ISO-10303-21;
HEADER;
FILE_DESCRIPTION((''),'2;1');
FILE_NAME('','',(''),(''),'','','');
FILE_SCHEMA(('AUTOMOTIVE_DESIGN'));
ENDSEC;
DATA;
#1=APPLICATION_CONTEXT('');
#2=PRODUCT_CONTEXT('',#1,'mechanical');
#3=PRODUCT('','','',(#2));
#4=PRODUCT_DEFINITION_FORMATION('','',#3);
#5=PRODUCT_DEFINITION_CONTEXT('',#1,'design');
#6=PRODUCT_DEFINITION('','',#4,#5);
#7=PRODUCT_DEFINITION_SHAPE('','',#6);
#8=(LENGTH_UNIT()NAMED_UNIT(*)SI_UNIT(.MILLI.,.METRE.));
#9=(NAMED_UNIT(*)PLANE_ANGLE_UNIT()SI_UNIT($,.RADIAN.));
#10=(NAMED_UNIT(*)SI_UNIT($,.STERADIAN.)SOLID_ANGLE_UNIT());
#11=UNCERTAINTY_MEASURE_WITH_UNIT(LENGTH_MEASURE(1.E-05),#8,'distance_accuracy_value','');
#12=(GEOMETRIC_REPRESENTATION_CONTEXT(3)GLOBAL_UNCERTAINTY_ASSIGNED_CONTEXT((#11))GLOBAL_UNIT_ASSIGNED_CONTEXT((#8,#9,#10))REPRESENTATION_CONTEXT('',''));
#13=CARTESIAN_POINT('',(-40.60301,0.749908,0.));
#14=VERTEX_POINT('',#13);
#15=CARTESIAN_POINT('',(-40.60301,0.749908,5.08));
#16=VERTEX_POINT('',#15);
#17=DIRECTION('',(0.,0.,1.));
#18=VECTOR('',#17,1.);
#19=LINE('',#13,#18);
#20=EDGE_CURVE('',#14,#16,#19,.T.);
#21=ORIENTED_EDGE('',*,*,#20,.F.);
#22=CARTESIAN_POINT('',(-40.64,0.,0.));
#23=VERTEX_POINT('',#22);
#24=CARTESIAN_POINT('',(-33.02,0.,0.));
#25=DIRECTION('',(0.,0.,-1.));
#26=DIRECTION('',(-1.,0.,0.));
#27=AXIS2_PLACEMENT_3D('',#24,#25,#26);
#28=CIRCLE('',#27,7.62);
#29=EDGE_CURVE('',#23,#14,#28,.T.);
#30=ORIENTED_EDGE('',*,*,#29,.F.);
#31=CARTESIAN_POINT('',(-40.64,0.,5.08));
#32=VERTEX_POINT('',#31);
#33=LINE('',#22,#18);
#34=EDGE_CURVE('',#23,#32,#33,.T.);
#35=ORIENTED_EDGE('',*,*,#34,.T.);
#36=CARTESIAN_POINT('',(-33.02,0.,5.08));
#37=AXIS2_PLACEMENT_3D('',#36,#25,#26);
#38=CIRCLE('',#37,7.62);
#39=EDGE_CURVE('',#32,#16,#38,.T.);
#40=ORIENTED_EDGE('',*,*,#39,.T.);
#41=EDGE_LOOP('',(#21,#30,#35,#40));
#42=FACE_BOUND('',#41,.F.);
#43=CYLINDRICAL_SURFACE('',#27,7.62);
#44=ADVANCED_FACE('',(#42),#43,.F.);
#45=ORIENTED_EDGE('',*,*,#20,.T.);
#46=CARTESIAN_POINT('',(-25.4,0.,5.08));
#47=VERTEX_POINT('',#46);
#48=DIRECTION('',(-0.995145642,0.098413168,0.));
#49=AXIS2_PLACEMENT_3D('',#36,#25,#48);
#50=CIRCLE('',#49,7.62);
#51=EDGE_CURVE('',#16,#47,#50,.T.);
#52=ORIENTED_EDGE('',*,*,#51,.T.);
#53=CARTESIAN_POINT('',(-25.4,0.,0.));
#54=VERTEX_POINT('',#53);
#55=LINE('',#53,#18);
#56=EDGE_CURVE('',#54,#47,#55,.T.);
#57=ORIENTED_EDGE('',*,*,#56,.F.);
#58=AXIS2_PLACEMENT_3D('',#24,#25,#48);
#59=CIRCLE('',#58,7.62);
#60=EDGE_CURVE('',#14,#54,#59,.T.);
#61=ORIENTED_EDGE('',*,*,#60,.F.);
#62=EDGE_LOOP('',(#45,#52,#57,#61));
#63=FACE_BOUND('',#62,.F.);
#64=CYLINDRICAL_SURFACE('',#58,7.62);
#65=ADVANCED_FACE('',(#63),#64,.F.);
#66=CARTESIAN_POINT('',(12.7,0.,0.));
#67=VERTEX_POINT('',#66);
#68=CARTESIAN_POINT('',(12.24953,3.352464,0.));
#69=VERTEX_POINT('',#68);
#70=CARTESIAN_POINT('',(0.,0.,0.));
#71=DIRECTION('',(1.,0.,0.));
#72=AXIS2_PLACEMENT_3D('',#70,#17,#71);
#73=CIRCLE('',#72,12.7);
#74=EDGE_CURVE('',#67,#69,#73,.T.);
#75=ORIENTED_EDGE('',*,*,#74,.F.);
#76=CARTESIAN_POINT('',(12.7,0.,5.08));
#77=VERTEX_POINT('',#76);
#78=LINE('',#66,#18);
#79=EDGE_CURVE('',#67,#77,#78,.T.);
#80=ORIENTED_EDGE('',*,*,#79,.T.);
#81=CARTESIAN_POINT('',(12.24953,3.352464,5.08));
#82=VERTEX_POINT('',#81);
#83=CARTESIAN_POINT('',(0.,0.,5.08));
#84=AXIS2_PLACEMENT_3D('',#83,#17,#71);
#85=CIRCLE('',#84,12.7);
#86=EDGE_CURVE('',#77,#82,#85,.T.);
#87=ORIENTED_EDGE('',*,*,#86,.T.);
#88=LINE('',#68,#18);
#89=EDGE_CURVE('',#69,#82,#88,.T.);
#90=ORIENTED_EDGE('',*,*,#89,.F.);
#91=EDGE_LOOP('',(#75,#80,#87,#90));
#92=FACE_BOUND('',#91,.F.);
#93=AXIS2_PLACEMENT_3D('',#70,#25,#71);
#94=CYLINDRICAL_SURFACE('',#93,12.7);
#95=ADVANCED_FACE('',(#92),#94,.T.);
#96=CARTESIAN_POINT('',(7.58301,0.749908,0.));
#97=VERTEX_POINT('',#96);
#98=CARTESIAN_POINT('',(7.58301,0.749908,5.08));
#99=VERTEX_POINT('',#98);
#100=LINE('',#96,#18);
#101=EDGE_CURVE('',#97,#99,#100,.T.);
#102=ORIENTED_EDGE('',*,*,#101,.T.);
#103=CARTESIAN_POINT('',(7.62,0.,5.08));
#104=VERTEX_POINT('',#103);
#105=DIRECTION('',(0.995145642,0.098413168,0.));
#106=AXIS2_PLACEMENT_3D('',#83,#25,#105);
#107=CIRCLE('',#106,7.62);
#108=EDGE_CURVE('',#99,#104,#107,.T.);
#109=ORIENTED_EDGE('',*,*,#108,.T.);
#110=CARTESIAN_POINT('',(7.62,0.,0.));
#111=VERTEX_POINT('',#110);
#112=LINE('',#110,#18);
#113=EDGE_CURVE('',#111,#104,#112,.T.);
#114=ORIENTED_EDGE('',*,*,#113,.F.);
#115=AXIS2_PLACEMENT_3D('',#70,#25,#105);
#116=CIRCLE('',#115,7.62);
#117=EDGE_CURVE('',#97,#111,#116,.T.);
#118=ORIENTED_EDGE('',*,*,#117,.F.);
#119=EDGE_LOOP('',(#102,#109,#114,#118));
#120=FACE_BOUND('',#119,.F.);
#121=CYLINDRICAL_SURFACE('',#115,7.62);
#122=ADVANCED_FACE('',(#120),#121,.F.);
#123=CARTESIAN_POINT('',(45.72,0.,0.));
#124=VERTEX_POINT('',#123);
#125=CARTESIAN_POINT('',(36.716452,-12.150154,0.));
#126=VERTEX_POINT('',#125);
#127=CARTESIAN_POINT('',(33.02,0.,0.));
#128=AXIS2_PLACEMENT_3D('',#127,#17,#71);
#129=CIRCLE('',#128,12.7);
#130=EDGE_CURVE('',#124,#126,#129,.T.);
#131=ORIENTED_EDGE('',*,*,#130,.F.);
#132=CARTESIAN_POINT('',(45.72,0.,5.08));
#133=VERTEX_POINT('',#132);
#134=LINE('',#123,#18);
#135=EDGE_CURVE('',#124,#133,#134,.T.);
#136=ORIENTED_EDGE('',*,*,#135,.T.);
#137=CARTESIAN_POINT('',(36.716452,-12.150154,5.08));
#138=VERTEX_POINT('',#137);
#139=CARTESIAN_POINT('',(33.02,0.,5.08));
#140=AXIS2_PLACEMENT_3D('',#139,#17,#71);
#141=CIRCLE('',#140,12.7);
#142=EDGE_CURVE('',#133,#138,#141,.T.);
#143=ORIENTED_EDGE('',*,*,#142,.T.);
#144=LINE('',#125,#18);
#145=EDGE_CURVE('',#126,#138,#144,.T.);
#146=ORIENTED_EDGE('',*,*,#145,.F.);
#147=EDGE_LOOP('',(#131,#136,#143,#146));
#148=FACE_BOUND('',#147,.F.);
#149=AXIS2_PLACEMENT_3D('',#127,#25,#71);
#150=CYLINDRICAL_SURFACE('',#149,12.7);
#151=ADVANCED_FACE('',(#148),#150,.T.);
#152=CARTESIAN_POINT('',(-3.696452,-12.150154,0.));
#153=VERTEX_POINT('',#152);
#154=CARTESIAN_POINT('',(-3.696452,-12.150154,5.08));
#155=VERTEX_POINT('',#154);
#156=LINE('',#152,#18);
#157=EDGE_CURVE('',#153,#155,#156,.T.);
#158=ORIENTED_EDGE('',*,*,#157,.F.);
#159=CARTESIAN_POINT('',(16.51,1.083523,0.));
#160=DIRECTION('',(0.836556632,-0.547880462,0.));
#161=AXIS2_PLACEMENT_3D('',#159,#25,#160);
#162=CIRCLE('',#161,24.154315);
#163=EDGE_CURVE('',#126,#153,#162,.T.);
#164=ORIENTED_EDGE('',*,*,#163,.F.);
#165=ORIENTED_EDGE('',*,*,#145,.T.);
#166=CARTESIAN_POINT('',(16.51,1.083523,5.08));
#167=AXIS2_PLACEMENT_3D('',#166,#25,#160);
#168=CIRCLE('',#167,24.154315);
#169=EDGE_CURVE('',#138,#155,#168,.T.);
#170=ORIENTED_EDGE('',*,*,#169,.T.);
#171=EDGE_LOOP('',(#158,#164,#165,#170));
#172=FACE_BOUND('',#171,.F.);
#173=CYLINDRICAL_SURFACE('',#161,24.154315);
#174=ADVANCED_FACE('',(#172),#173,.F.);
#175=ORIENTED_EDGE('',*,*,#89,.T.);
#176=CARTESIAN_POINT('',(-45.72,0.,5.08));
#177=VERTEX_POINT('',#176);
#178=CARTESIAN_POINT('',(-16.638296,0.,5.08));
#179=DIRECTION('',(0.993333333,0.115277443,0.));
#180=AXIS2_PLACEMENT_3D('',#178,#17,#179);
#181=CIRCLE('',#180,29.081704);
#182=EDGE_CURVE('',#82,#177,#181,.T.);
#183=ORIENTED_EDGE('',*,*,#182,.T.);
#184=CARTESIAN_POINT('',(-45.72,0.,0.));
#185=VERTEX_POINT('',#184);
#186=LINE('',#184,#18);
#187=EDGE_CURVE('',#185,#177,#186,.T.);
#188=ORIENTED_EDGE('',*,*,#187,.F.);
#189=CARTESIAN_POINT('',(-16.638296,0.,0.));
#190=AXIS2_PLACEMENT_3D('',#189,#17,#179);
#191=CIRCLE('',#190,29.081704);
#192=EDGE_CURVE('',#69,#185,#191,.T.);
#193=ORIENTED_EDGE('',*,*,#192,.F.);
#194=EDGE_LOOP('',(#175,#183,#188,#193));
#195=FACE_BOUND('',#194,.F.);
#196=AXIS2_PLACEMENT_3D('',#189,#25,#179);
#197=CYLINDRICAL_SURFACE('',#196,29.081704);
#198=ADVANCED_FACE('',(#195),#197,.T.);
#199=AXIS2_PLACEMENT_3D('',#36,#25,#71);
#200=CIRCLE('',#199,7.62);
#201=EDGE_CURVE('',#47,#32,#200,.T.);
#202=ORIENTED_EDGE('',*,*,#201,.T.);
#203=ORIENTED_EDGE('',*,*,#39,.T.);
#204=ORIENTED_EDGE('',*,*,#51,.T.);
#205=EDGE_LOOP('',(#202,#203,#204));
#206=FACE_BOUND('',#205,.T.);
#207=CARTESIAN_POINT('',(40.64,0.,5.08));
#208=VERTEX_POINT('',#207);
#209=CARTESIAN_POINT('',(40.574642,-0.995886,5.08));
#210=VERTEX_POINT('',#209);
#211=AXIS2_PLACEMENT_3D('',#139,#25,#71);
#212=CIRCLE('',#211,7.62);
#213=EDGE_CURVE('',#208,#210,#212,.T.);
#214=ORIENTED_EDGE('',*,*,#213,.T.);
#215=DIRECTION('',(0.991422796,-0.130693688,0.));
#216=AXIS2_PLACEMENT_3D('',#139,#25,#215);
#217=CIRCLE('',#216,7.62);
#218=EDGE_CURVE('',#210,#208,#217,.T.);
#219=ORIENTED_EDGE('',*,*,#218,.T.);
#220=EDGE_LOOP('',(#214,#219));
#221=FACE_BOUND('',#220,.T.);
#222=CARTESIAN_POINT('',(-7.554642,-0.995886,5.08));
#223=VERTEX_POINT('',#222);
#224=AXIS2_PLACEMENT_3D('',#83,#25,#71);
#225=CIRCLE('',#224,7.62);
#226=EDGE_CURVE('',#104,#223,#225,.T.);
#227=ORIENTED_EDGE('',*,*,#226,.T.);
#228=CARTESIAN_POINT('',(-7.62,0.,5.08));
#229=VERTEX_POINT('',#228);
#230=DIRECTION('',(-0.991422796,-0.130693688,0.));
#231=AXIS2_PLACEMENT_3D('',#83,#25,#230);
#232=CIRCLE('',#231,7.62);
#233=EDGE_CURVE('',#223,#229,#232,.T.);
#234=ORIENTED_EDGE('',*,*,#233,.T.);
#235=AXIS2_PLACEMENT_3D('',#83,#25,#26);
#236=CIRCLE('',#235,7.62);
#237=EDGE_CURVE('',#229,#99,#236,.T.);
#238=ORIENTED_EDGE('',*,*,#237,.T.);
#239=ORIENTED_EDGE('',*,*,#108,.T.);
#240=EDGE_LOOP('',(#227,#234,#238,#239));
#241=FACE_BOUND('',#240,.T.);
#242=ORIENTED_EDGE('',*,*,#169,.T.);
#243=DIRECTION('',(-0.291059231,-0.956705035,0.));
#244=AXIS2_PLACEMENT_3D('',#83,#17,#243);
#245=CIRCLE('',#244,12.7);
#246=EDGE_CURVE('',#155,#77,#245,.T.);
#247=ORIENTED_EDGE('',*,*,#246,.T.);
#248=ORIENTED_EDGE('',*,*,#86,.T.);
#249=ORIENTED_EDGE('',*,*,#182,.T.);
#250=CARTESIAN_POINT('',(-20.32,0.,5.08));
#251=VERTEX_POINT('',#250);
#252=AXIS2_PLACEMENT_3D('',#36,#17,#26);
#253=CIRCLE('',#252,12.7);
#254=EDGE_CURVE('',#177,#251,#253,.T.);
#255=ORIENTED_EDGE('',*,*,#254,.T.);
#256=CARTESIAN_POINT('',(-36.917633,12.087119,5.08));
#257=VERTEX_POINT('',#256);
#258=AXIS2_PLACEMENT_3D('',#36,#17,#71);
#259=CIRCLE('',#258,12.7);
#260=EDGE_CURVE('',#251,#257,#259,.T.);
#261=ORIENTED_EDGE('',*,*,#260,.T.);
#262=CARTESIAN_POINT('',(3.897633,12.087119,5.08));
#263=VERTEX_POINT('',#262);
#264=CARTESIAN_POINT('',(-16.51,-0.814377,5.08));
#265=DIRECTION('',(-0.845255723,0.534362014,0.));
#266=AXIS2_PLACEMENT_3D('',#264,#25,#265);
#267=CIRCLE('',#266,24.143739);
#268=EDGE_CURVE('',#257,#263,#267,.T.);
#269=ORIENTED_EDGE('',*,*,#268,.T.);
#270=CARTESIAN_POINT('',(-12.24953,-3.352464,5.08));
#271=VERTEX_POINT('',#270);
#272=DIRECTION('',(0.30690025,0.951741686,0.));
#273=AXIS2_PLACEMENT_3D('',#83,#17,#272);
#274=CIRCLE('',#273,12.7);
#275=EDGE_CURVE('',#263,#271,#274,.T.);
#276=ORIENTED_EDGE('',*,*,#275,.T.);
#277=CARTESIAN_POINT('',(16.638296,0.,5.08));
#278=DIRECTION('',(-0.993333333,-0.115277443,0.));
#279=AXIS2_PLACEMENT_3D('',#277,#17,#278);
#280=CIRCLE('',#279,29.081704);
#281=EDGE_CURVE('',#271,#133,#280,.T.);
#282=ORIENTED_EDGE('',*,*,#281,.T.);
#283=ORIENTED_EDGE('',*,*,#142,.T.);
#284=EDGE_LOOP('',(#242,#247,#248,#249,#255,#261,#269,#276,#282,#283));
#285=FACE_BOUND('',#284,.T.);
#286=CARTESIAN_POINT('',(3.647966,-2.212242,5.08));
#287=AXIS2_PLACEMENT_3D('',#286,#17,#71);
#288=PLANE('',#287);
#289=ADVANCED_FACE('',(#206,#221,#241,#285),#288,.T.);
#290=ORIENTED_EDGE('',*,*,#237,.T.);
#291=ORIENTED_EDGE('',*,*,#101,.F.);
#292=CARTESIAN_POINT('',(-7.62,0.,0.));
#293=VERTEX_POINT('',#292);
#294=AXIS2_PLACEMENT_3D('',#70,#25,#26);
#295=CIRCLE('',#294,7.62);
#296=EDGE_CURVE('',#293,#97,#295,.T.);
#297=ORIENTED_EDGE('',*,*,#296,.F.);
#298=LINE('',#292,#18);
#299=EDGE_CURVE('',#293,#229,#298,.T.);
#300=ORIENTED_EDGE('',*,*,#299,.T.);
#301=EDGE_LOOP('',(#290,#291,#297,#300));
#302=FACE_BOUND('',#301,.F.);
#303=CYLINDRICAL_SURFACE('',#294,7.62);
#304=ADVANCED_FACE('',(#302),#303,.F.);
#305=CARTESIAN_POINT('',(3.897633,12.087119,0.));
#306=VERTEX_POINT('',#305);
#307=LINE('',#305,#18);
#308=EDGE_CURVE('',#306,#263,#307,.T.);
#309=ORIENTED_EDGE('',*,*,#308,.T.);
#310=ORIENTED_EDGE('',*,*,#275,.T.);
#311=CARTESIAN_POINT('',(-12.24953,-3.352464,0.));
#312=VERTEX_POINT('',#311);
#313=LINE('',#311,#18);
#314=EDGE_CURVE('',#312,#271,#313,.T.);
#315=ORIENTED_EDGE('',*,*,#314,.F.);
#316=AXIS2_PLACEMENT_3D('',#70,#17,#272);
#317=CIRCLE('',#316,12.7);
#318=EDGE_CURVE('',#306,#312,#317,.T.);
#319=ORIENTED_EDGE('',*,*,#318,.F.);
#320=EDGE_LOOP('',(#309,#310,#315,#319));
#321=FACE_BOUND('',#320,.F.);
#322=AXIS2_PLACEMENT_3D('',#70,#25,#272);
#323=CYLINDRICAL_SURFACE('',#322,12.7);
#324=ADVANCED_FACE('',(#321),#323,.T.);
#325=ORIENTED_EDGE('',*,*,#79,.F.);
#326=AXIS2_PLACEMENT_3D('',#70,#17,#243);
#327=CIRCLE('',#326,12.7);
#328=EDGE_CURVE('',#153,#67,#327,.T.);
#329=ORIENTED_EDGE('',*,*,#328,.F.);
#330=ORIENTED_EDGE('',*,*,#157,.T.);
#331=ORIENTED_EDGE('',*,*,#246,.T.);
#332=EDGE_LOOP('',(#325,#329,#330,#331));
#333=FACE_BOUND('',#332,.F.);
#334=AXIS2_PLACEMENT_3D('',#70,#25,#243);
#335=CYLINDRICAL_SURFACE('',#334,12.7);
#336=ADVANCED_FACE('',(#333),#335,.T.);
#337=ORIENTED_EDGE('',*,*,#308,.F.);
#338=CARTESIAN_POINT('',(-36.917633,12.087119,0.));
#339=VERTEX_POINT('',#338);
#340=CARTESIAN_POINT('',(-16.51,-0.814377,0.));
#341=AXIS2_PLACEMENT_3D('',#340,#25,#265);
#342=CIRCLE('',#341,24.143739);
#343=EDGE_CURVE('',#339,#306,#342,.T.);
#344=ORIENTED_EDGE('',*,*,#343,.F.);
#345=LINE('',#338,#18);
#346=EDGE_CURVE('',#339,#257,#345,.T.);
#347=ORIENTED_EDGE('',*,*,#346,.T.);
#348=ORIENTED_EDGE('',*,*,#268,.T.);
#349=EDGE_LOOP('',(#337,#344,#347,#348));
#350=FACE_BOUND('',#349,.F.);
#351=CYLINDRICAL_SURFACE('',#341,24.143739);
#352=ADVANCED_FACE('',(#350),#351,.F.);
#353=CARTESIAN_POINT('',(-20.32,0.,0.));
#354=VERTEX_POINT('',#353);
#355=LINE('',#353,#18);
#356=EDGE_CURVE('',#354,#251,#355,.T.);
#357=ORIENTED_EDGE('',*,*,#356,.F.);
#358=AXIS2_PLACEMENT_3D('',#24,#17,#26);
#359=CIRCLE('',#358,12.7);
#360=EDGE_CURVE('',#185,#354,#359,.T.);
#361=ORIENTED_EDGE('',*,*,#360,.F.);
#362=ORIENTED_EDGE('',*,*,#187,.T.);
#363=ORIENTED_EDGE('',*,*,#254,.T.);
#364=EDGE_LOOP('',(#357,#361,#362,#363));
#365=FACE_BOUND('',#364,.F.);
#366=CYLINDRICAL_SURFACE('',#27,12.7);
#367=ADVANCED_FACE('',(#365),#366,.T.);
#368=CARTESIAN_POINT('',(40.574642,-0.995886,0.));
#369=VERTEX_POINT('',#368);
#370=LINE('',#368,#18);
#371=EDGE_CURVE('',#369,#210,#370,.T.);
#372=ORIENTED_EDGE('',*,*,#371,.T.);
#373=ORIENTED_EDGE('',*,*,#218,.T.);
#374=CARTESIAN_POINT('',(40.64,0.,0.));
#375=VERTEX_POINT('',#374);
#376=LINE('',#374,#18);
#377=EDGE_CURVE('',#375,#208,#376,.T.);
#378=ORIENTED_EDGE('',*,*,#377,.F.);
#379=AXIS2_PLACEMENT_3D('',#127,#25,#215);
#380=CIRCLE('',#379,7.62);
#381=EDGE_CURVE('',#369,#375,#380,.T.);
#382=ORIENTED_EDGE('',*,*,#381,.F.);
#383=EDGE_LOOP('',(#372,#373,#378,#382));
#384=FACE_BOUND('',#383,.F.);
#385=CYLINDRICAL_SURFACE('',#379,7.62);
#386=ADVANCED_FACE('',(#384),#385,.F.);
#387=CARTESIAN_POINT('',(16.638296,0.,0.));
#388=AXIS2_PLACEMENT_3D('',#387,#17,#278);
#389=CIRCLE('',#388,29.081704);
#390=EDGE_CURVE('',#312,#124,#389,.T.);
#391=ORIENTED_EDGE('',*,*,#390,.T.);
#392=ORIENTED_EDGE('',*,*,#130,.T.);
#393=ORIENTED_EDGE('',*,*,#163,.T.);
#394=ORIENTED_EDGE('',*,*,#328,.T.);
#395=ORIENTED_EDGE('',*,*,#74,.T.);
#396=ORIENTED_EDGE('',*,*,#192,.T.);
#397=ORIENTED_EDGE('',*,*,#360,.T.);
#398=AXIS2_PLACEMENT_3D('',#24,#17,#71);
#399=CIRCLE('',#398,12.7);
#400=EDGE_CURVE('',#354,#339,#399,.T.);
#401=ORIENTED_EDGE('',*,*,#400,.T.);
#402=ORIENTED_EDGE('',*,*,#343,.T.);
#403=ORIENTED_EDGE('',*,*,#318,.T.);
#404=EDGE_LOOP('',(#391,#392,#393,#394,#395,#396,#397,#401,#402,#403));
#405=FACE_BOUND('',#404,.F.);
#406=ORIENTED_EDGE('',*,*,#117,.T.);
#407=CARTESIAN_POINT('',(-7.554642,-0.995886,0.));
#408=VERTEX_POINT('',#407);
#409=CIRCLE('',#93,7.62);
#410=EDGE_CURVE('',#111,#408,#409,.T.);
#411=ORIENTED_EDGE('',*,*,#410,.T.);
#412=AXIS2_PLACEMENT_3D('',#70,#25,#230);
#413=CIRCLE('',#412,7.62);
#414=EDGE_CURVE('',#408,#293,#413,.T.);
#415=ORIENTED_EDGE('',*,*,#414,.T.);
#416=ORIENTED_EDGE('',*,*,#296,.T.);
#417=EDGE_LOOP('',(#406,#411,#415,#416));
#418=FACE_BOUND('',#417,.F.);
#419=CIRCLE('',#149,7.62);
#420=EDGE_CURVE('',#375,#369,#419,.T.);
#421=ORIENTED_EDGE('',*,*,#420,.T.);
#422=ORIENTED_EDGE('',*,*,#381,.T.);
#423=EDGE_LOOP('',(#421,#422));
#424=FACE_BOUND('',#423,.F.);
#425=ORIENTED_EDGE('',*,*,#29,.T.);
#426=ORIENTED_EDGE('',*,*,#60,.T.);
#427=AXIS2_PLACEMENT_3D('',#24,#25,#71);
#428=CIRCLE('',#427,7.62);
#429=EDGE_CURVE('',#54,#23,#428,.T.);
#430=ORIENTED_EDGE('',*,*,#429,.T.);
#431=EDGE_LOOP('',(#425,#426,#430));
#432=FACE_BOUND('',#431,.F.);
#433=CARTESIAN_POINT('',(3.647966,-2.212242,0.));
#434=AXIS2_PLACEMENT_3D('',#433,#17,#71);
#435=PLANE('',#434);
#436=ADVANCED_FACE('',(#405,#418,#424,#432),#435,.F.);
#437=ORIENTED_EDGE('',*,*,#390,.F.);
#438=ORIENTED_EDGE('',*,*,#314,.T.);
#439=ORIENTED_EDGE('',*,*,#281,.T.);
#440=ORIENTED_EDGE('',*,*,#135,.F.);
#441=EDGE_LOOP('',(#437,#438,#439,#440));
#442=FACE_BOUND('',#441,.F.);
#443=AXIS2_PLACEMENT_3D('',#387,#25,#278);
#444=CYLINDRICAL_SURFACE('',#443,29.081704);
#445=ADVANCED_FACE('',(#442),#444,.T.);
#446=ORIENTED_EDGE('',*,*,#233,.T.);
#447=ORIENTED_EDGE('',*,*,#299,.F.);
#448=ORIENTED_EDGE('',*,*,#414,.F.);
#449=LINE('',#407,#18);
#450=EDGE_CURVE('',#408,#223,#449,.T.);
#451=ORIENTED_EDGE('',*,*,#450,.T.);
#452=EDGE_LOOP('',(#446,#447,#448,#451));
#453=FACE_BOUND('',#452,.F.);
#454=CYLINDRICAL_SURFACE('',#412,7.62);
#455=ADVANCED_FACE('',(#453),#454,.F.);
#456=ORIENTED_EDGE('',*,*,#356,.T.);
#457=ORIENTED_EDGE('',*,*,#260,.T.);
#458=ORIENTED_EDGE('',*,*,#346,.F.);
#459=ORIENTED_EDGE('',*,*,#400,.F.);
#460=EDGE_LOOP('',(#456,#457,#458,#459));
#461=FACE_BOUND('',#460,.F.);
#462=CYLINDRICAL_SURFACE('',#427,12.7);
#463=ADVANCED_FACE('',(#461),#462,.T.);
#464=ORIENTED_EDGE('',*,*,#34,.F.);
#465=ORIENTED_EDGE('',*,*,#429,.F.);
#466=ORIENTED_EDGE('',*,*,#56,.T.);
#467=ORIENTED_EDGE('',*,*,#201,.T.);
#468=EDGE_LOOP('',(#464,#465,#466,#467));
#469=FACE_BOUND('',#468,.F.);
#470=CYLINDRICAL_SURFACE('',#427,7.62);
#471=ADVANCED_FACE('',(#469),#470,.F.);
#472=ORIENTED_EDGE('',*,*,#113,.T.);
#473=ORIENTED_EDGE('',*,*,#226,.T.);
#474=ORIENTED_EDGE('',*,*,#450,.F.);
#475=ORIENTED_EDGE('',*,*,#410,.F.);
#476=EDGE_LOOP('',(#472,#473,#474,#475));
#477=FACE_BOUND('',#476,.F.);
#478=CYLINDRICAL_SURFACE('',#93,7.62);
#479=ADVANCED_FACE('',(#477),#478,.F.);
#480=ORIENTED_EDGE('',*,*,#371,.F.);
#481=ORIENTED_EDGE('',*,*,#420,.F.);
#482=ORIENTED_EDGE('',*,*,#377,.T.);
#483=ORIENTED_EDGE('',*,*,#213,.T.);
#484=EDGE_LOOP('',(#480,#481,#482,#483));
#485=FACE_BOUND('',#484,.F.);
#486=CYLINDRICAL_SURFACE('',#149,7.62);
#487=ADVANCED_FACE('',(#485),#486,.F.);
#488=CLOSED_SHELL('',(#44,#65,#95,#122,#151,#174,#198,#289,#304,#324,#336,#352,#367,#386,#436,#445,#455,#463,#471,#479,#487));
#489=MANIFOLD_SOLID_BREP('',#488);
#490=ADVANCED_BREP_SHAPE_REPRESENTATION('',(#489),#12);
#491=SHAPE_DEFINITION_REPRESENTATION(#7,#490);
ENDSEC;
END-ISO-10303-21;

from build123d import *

# Parameters (mm, degrees)
F1_DEPTH = 5.08


# Not quite as in the source:
# - a feature names something its author has since deleted; it is built from what else it names


with BuildPart() as f1:
    # F0 (on Top) → F1 (new body)
    with BuildSketch(Plane.XY):
        with BuildLine():
            ThreePointArc((7.5830097901, 0.7499083436), (7.6107468293, 0.3754100423), (7.62, 0))
            ThreePointArc((7.62, 0), (0.4990141385, -7.6036428697), (-7.5546417033, -0.9958859045))
            ThreePointArc((-7.5546417033, -0.9958859045), (-6.3173271202, -6.8123022238), (-3.6964522326, -12.1501539452))
            ThreePointArc((-3.6964522326, -12.1501539452), (7.5612517696, -10.2037969245), (12.7, 0))
            ThreePointArc((12.7, 0), (12.5868786701, 1.6912969415), (12.249529867, 3.3524644721))
            ThreePointArc((12.249529867, 3.3524644721), (9.1791212991, 8.776886246), (3.897633179, 12.0871194088))
            ThreePointArc((3.897633179, 12.0871194088), (6.451051693, 6.6495502812), (7.5830097901, 0.7499083436))
        make_face()
        with BuildLine():
            ThreePointArc((-36.917633179, 12.0871194088), (-16.51, 23.3293611901), (3.897633179, 12.0871194088))
            ThreePointArc((3.897633179, 12.0871194088), (9.1791212991, 8.776886246), (12.249529867, 3.3524644721))
            ThreePointArc((12.249529867, 3.3524644721), (-18.3173290135, 29.0331939814), (-45.72, 0))
            ThreePointArc((-45.72, 0), (-43.286205272, 7.4762978347), (-36.917633179, 12.0871194088))
        make_face()
        with BuildLine():
            ThreePointArc((-20.32, 0), (-25.5437021653, 10.266205272), (-36.917633179, 12.0871194088))
            ThreePointArc((-36.917633179, 12.0871194088), (-43.286205272, 7.4762978347), (-45.72, 0))
            ThreePointArc((-45.72, 0), (-33.02, -12.7), (-20.32, 0))
        make_face()
        with BuildLine():
            ThreePointArc((-40.64, 0), (-40.6307468293, 0.3754100423), (-40.6030097901, 0.7499083436))
            ThreePointArc((-40.6030097901, 0.7499083436), (-32.6445899577, 7.6107468293), (-25.4, 0))
            ThreePointArc((-25.4, 0), (-33.02, -7.62), (-40.64, 0))
        make_face(mode=Mode.SUBTRACT)
        with BuildLine():
            ThreePointArc((36.7164522326, -12.1501539452), (16.51, -23.0707915841), (-3.6964522326, -12.1501539452))
            ThreePointArc((-3.6964522326, -12.1501539452), (-9.1059552655, -8.8527723739), (-12.249529867, -3.3524644721))
            ThreePointArc((-12.249529867, -3.3524644721), (18.3173290135, -29.0331939814), (45.72, 0))
            ThreePointArc((45.72, 0), (43.2237969245, -7.5612517696), (36.7164522326, -12.1501539452))
        make_face()
        with BuildLine():
            ThreePointArc((45.72, 0), (22.8162030755, 7.5612517696), (36.7164522326, -12.1501539452))
            ThreePointArc((36.7164522326, -12.1501539452), (43.2237969245, -7.5612517696), (45.72, 0))
        make_face()
        with BuildLine():
            ThreePointArc((40.64, 0), (40.6236428697, -0.4990141385), (40.5746417033, -0.9958859045))
            ThreePointArc((40.5746417033, -0.9958859045), (25.4163571303, 0.4990141385), (40.64, 0))
        make_face(mode=Mode.SUBTRACT)
        with BuildLine():
            ThreePointArc((-7.62, 0), (-0.3754100423, 7.6107468293), (7.5830097901, 0.7499083436))
            ThreePointArc((7.5830097901, 0.7499083436), (6.451051693, 6.6495502812), (3.897633179, 12.0871194088))
            ThreePointArc((3.897633179, 12.0871194088), (-8.776886246, 9.1791212991), (-12.249529867, -3.3524644721))
            ThreePointArc((-12.249529867, -3.3524644721), (-9.1059552655, -8.8527723739), (-3.6964522326, -12.1501539452))
            ThreePointArc((-3.6964522326, -12.1501539452), (-6.3173271202, -6.8123022238), (-7.5546417033, -0.9958859045))
            ThreePointArc((-7.5546417033, -0.9958859045), (-7.6036428697, -0.4990141385), (-7.62, 0))
        make_face()
    extrude(amount=F1_DEPTH)


solid = f1.part
